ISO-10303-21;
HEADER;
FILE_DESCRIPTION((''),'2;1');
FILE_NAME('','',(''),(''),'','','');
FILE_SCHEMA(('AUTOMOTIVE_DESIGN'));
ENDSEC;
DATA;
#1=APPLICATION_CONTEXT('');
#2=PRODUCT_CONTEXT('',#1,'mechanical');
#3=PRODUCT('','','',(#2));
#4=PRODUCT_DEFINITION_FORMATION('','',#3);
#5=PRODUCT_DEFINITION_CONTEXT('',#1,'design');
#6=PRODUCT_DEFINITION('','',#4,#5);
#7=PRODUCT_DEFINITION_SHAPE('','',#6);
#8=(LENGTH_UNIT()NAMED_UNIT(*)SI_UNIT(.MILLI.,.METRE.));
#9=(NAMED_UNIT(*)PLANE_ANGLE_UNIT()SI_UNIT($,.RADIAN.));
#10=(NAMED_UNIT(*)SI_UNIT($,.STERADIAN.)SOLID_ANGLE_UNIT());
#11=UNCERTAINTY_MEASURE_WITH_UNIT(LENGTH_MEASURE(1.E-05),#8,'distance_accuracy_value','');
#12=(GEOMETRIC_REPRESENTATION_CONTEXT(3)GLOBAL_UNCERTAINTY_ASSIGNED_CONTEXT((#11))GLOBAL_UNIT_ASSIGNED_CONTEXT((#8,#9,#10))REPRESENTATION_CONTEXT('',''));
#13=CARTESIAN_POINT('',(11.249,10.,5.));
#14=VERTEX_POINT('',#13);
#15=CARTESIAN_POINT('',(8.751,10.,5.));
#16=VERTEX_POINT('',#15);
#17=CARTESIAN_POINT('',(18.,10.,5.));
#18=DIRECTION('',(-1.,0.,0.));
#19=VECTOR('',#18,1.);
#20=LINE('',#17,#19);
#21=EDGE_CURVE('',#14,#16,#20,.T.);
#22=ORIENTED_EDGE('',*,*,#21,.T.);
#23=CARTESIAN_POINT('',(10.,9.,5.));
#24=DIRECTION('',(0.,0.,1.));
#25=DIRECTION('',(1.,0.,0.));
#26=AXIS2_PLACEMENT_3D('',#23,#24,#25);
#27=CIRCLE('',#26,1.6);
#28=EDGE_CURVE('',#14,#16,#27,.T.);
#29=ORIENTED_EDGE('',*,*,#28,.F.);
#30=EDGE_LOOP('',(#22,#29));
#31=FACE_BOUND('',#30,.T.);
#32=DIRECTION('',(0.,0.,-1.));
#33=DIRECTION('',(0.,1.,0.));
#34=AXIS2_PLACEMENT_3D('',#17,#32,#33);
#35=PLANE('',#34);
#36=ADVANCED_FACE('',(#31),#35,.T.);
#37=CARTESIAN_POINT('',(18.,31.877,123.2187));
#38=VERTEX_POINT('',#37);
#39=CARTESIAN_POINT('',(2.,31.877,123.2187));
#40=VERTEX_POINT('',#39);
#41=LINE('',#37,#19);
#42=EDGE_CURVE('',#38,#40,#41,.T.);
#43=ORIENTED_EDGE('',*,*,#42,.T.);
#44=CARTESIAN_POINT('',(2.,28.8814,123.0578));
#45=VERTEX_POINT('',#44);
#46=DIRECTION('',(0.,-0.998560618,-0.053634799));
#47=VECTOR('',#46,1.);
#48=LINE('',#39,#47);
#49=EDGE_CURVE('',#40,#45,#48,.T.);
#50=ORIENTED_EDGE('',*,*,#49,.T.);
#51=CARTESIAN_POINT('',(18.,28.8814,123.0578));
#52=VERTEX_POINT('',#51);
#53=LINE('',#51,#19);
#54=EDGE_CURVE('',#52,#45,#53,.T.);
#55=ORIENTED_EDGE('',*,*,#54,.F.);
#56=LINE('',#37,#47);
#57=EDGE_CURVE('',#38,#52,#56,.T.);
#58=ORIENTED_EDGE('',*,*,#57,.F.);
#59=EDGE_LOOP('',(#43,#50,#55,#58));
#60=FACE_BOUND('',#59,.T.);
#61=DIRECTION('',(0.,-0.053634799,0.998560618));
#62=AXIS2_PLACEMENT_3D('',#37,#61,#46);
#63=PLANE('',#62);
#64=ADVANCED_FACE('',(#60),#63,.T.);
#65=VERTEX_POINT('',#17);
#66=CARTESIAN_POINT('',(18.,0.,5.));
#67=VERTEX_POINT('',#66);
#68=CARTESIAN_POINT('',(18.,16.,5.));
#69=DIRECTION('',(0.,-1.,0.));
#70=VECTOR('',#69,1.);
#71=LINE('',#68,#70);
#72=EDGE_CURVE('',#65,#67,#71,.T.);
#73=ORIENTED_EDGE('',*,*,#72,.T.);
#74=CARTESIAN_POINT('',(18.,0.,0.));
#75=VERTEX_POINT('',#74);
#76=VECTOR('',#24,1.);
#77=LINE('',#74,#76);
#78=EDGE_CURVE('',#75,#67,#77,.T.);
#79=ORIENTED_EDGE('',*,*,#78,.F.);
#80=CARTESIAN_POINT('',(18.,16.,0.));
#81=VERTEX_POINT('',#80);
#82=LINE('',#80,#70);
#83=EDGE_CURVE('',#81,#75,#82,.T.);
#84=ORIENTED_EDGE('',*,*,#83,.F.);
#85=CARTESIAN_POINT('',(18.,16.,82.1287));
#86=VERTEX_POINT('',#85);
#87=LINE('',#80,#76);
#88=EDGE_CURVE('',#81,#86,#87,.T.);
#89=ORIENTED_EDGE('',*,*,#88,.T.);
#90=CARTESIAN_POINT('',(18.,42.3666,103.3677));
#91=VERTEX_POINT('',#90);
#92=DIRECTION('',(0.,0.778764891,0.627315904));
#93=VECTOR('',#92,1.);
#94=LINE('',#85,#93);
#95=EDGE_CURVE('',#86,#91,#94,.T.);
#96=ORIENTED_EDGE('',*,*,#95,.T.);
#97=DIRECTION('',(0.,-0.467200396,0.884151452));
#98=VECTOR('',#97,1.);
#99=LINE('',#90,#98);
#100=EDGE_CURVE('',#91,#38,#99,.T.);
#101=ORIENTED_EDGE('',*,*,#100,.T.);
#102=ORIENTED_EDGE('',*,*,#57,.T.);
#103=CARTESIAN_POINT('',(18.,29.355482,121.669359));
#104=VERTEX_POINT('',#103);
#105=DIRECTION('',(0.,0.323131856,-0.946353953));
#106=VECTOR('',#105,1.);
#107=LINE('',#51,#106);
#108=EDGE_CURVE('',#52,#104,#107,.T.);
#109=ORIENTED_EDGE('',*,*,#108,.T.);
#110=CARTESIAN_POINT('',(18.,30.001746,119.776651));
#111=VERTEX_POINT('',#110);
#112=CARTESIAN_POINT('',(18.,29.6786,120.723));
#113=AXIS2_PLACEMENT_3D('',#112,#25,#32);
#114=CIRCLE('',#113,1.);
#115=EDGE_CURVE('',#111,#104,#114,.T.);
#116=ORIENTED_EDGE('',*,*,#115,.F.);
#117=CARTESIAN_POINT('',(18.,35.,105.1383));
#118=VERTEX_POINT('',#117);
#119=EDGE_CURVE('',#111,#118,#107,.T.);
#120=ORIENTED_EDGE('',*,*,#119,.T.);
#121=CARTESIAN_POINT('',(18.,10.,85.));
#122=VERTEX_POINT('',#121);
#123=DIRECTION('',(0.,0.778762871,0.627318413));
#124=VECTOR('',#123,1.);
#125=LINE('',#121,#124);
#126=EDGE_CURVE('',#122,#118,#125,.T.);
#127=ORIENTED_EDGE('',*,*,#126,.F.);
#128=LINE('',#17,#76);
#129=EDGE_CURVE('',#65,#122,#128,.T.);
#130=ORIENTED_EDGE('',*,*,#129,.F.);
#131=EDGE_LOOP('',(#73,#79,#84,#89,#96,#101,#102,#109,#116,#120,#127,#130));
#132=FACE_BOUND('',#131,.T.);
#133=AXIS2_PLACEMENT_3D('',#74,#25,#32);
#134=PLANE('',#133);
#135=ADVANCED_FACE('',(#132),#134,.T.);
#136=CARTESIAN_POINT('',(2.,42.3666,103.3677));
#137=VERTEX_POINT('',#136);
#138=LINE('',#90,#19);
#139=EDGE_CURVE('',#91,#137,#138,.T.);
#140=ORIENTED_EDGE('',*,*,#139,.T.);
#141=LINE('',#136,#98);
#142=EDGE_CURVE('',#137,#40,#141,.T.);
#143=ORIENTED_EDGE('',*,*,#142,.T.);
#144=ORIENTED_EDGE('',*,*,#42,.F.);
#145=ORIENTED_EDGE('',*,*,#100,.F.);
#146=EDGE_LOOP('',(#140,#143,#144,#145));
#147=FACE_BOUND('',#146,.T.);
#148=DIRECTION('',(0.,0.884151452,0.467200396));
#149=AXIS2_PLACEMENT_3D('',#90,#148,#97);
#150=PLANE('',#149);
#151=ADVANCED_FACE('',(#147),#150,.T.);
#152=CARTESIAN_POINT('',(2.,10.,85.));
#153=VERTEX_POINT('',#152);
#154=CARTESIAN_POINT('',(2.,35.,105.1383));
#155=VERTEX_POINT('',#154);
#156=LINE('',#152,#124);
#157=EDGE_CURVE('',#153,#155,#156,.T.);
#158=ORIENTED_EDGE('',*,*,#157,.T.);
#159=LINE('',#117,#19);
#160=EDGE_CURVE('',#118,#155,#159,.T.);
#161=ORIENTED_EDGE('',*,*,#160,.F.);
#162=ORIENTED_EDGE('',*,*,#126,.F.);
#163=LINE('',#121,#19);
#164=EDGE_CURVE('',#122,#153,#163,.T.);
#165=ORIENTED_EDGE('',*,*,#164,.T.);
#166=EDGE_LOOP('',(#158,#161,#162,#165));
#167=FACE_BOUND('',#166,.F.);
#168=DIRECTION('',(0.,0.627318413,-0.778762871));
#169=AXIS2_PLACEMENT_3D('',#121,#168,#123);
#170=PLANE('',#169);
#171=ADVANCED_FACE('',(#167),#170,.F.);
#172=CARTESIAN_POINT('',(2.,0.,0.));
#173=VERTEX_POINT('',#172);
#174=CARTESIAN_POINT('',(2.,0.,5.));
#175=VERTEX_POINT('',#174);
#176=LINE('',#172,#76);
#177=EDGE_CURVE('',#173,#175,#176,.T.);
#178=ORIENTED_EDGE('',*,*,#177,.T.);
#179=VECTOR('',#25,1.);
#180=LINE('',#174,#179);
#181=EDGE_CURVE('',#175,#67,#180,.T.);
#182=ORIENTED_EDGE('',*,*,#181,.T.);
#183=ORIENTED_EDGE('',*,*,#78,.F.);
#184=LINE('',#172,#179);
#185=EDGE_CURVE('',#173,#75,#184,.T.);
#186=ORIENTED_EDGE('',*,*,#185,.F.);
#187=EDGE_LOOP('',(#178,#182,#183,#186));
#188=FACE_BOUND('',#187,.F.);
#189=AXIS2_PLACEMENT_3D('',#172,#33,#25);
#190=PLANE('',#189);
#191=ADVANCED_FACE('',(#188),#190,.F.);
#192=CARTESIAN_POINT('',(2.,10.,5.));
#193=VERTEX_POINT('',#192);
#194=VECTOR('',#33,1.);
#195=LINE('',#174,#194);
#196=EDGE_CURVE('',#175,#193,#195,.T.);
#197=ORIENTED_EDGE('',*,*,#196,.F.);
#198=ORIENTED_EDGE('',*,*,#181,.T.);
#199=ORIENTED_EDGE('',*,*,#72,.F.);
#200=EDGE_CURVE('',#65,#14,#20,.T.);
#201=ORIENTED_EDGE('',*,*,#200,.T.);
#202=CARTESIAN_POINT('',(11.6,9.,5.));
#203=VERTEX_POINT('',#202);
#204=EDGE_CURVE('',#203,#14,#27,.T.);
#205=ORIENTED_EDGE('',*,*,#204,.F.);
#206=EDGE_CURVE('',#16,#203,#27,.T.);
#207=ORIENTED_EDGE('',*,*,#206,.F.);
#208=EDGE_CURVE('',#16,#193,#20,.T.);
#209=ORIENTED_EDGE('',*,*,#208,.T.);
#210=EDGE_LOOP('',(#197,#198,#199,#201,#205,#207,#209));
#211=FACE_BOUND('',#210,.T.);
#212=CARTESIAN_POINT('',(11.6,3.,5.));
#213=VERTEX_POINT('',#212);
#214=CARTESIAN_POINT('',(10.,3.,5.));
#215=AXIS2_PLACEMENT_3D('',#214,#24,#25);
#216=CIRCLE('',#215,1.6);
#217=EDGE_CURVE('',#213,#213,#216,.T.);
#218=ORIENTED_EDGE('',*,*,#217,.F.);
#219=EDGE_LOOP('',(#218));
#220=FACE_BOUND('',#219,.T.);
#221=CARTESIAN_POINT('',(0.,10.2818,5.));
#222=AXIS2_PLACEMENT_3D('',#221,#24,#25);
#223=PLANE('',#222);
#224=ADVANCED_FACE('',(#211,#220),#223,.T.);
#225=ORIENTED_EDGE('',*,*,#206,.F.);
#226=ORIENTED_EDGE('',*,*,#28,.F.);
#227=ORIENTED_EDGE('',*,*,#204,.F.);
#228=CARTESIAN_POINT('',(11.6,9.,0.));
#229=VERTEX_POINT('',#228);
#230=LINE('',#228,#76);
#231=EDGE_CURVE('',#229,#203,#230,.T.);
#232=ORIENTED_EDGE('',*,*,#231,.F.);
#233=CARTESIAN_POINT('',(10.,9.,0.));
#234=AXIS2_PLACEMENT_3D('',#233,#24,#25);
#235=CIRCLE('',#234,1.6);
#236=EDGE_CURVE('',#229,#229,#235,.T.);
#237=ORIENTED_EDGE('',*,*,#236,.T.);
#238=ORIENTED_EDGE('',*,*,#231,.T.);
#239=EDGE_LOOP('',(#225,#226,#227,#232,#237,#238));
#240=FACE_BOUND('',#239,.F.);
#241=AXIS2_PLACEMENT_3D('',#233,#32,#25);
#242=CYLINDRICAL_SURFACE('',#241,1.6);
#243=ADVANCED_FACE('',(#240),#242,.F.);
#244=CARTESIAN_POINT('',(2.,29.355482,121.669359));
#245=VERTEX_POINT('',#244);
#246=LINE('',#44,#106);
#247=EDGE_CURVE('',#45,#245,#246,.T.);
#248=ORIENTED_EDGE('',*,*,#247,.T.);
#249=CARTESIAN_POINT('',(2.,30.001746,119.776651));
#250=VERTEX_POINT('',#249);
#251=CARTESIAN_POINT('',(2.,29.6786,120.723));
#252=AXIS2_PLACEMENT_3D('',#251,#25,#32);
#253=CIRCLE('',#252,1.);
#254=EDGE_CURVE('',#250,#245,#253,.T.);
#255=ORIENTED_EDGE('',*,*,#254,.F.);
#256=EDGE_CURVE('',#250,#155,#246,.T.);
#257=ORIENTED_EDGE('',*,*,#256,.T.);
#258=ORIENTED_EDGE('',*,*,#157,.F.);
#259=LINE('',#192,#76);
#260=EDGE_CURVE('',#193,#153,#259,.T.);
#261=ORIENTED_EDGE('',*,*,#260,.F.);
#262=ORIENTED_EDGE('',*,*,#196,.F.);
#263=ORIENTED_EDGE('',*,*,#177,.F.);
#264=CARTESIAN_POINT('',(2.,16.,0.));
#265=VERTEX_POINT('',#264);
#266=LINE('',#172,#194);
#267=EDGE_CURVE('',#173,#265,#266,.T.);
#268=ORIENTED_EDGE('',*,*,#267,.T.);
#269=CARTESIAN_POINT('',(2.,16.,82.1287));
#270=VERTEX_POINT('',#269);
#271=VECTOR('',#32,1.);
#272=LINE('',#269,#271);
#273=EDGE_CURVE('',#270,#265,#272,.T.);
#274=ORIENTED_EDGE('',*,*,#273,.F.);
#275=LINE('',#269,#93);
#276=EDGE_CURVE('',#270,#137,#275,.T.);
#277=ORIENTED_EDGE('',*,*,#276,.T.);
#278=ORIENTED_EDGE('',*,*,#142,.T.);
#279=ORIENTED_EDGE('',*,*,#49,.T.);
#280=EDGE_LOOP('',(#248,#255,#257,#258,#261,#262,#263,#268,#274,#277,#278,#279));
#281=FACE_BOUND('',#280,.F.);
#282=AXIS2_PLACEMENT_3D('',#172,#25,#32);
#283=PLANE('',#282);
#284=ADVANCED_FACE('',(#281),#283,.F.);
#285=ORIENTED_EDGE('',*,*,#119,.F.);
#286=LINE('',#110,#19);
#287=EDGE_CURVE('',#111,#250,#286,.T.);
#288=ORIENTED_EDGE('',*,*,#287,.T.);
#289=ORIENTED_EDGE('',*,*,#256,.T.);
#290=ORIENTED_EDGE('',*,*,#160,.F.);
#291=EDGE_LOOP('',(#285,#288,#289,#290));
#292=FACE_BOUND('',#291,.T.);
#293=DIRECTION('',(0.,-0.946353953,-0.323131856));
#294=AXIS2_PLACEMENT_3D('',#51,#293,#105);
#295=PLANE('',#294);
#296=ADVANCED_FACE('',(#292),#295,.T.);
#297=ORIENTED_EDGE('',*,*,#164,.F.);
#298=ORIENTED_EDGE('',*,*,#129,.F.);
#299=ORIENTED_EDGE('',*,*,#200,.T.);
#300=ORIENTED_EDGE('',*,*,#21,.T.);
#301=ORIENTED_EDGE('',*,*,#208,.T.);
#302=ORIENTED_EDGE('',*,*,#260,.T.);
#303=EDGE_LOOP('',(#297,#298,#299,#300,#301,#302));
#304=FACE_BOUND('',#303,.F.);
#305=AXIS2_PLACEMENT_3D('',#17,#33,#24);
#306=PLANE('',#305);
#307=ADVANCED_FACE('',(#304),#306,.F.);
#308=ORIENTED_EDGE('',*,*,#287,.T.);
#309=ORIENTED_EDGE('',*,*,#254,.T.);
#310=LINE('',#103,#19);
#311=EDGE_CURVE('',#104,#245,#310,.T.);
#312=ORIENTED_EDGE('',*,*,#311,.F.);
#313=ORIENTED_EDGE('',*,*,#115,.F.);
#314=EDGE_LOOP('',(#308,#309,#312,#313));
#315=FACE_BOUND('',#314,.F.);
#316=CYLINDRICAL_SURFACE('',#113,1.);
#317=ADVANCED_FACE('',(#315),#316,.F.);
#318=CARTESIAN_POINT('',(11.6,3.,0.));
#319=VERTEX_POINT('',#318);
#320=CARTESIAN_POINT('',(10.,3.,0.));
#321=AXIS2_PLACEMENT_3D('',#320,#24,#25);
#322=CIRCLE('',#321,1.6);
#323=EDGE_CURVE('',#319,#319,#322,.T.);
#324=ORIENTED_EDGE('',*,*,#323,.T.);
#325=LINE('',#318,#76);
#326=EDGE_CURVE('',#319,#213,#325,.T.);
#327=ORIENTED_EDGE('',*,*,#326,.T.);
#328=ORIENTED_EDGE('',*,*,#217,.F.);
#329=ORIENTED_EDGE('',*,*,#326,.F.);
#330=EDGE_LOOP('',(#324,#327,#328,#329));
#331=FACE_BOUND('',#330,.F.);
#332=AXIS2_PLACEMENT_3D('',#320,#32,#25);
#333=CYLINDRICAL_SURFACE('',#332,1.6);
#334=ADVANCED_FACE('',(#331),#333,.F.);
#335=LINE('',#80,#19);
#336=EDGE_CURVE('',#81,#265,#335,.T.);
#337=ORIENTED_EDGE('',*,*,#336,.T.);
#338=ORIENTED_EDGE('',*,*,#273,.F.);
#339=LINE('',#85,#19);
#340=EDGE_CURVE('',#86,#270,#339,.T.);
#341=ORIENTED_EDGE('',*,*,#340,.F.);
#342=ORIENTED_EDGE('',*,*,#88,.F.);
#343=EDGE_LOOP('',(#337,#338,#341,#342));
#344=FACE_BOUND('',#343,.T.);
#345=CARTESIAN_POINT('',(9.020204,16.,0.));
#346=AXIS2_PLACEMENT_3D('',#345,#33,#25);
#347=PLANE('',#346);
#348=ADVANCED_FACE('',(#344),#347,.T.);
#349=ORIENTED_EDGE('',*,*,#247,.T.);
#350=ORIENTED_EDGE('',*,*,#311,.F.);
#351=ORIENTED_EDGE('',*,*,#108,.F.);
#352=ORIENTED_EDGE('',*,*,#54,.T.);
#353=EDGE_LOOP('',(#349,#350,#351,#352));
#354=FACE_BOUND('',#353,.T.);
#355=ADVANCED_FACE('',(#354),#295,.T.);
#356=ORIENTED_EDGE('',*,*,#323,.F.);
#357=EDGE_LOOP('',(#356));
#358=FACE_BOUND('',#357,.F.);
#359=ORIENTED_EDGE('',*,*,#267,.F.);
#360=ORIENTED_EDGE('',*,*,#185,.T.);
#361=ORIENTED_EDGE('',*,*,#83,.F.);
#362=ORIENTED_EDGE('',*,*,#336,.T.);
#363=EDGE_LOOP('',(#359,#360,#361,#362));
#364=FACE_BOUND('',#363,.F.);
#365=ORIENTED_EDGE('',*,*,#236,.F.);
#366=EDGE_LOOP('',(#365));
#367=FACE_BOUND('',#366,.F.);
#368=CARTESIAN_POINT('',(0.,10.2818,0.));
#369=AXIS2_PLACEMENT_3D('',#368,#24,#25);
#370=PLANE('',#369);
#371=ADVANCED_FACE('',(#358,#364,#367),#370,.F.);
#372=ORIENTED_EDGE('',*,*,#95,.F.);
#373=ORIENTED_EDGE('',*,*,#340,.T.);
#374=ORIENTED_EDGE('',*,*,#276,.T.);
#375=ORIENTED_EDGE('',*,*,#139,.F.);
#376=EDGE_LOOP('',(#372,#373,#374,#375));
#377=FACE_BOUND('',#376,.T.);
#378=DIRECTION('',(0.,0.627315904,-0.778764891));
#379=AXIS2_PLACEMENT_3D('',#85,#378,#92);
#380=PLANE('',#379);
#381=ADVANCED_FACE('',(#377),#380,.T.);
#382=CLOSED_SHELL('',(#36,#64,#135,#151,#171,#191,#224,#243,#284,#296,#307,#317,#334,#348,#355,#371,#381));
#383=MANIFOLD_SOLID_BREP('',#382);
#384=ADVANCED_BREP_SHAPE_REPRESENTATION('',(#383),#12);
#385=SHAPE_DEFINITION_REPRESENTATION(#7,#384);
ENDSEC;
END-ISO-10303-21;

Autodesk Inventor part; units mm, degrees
ref_plane "YZ Plane" through (0, 0, 0) normal (1, 0, 0) x (0, 1, 0)
ref_plane "XZ Plane" through (0, 0, 0) normal (0, 1, 0) x (-1, 0, 0)
ref_plane "XY Plane" through (0, 0, 0) normal (0, 0, 1) x (1, 0, 0)
ref_plane "Arbeitsebene1" through (0, 10.2818, 0) normal (0, 0, 1) x (1, 0, 0)
sketch "Skizze1" plane through (0, 10.2818, 0) normal (0, 0, 1) x (1, 0, 0)
  circle A0 centre (10, 10.7182) radius 1.4 projected
  circle A1 centre (10, 4.7182) radius 1.4 projected
  circle A2 centre (10, -1.2818) radius 1.4 projected
  circle A3 centre (10, -7.2818) radius 1.4 projected
  line L0 (0, 12.7182) -> (2, 14.7182) projected
  line L1 (0, -8.2818) -> (0, 12.7182) projected
  line L2 (2, -10.2818) -> (0, -8.2818) projected
  line L3 (2, -10.2818) -> (18, -10.2818) projected
  line L4 (20, -8.2818) -> (18, -10.2818) projected
  line L5 (20, -8.2818) -> (20, 12.7182) projected
  line L6 (18, 14.7182) -> (20, 12.7182) projected
  line L7 (2, 14.7182) -> (18, 14.7182) projected
  line L8 (18, -10.2818) -> (2, -10.2818)
  line L9 (2, -10.2818) -> (2, 5.7182)
  line L10 (2, 5.7182) -> (18, 5.7182)
  line L11 (18, 5.7182) -> (18, -10.2818)
  circle A4 centre (10, -1.2818) radius 1.6
  circle A5 centre (10, -7.2818) radius 1.6
  point P0 (0, -10.2818)
  point P1 (2, -10.2818)
  dimension "d0" = 16
  dimension "d1" = 3.2
  dimension "d2" = 3.2
extrude "Extrusion1" add sketch "Skizze1" along normal blind 5 contours A1 L10 | A1 L10 L11 L3 L9 picked at (10.1558, 4.945)
sketch "Skizze2" plane through (18, 0, 0) normal (1, 0, 0) x (0, 0, -1)
  line L0 (0, 0) -> (0, 16) projected
  line L1 (0, 16) -> (-5, 16) projected
  line L2 (-5, 0) -> (-5, 16) projected
  line L3 (0, 0) -> (-5, 0) projected
  line L4 (-5, 16) -> (100, 16) construction
  line L5 (-103.3677, 42.3666) -> (-123.2187, 31.877)
  line L6 (-123.2187, 31.877) -> (-123.0578, 28.8814)
  line L7 (-123.0578, 28.8814) -> (-105.1383, 35)
  line L8 (-5, 10) -> (-85, 10)
  line L9 (-85, 10) -> (-105.1383, 35)
  line L10 (-5, 16) -> (-82.1287, 16)
  line L11 (-82.1287, 16) -> (-103.3677, 42.3666)
  point P0 (0, 0)
  point P1 (-123.1383, 30.3792)
  dimension "d8" = 3
  dimension "d9" = 6
  dimension "d15" = 80
  dimension "d16" = 6
  dimension "d17" = 9
  dimension "d18" = 110
  dimension "d19" = 18
  dimension "d20" = 25
extrude "Extrusion2" add sketch "Skizze2" against normal up to surface (16 mm away) contours L2 L8 L9 L7 L6 L5 L11 L10
sketch "Skizze3" plane through (18, 0, 0) normal (1, 0, 0) x (0, 0, -1)
  line L0 (0, 0) -> (0, 16) projected
  line L1 (0, 16) -> (-82.1287, 16) projected
  line L2 (-103.3677, 42.3666) -> (-123.2187, 31.877) projected
  line L3 (-123.2187, 31.877) -> (-123.0578, 28.8814) projected
  line L4 (-123.0578, 28.8814) -> (-105.1383, 35) projected
  line L5 (-5, 0) -> (-5, 10) projected
  line L6 (0, 0) -> (-5, 0) projected
  circle A0 centre (-120.723, 29.6786) radius 1
  line L7 (-82.1287, 16) -> (-103.3677, 42.3666) projected
  line L8 (-105.1383, 35) -> (-85, 10) projected
  line L9 (-85, 10) -> (-5, 10) projected
  point P0 (0, 0)
  point P1 (-119.7766, 30.0017)
  point P2 (-121.6693, 29.3555)
  dimension "d12" = 2
extrude "Extrusion3" cut sketch "Skizze3" against normal through all contours L4 A0 picked at (-121.0524, 29.7298)
properties part number "OT2-Gripper_finger"
